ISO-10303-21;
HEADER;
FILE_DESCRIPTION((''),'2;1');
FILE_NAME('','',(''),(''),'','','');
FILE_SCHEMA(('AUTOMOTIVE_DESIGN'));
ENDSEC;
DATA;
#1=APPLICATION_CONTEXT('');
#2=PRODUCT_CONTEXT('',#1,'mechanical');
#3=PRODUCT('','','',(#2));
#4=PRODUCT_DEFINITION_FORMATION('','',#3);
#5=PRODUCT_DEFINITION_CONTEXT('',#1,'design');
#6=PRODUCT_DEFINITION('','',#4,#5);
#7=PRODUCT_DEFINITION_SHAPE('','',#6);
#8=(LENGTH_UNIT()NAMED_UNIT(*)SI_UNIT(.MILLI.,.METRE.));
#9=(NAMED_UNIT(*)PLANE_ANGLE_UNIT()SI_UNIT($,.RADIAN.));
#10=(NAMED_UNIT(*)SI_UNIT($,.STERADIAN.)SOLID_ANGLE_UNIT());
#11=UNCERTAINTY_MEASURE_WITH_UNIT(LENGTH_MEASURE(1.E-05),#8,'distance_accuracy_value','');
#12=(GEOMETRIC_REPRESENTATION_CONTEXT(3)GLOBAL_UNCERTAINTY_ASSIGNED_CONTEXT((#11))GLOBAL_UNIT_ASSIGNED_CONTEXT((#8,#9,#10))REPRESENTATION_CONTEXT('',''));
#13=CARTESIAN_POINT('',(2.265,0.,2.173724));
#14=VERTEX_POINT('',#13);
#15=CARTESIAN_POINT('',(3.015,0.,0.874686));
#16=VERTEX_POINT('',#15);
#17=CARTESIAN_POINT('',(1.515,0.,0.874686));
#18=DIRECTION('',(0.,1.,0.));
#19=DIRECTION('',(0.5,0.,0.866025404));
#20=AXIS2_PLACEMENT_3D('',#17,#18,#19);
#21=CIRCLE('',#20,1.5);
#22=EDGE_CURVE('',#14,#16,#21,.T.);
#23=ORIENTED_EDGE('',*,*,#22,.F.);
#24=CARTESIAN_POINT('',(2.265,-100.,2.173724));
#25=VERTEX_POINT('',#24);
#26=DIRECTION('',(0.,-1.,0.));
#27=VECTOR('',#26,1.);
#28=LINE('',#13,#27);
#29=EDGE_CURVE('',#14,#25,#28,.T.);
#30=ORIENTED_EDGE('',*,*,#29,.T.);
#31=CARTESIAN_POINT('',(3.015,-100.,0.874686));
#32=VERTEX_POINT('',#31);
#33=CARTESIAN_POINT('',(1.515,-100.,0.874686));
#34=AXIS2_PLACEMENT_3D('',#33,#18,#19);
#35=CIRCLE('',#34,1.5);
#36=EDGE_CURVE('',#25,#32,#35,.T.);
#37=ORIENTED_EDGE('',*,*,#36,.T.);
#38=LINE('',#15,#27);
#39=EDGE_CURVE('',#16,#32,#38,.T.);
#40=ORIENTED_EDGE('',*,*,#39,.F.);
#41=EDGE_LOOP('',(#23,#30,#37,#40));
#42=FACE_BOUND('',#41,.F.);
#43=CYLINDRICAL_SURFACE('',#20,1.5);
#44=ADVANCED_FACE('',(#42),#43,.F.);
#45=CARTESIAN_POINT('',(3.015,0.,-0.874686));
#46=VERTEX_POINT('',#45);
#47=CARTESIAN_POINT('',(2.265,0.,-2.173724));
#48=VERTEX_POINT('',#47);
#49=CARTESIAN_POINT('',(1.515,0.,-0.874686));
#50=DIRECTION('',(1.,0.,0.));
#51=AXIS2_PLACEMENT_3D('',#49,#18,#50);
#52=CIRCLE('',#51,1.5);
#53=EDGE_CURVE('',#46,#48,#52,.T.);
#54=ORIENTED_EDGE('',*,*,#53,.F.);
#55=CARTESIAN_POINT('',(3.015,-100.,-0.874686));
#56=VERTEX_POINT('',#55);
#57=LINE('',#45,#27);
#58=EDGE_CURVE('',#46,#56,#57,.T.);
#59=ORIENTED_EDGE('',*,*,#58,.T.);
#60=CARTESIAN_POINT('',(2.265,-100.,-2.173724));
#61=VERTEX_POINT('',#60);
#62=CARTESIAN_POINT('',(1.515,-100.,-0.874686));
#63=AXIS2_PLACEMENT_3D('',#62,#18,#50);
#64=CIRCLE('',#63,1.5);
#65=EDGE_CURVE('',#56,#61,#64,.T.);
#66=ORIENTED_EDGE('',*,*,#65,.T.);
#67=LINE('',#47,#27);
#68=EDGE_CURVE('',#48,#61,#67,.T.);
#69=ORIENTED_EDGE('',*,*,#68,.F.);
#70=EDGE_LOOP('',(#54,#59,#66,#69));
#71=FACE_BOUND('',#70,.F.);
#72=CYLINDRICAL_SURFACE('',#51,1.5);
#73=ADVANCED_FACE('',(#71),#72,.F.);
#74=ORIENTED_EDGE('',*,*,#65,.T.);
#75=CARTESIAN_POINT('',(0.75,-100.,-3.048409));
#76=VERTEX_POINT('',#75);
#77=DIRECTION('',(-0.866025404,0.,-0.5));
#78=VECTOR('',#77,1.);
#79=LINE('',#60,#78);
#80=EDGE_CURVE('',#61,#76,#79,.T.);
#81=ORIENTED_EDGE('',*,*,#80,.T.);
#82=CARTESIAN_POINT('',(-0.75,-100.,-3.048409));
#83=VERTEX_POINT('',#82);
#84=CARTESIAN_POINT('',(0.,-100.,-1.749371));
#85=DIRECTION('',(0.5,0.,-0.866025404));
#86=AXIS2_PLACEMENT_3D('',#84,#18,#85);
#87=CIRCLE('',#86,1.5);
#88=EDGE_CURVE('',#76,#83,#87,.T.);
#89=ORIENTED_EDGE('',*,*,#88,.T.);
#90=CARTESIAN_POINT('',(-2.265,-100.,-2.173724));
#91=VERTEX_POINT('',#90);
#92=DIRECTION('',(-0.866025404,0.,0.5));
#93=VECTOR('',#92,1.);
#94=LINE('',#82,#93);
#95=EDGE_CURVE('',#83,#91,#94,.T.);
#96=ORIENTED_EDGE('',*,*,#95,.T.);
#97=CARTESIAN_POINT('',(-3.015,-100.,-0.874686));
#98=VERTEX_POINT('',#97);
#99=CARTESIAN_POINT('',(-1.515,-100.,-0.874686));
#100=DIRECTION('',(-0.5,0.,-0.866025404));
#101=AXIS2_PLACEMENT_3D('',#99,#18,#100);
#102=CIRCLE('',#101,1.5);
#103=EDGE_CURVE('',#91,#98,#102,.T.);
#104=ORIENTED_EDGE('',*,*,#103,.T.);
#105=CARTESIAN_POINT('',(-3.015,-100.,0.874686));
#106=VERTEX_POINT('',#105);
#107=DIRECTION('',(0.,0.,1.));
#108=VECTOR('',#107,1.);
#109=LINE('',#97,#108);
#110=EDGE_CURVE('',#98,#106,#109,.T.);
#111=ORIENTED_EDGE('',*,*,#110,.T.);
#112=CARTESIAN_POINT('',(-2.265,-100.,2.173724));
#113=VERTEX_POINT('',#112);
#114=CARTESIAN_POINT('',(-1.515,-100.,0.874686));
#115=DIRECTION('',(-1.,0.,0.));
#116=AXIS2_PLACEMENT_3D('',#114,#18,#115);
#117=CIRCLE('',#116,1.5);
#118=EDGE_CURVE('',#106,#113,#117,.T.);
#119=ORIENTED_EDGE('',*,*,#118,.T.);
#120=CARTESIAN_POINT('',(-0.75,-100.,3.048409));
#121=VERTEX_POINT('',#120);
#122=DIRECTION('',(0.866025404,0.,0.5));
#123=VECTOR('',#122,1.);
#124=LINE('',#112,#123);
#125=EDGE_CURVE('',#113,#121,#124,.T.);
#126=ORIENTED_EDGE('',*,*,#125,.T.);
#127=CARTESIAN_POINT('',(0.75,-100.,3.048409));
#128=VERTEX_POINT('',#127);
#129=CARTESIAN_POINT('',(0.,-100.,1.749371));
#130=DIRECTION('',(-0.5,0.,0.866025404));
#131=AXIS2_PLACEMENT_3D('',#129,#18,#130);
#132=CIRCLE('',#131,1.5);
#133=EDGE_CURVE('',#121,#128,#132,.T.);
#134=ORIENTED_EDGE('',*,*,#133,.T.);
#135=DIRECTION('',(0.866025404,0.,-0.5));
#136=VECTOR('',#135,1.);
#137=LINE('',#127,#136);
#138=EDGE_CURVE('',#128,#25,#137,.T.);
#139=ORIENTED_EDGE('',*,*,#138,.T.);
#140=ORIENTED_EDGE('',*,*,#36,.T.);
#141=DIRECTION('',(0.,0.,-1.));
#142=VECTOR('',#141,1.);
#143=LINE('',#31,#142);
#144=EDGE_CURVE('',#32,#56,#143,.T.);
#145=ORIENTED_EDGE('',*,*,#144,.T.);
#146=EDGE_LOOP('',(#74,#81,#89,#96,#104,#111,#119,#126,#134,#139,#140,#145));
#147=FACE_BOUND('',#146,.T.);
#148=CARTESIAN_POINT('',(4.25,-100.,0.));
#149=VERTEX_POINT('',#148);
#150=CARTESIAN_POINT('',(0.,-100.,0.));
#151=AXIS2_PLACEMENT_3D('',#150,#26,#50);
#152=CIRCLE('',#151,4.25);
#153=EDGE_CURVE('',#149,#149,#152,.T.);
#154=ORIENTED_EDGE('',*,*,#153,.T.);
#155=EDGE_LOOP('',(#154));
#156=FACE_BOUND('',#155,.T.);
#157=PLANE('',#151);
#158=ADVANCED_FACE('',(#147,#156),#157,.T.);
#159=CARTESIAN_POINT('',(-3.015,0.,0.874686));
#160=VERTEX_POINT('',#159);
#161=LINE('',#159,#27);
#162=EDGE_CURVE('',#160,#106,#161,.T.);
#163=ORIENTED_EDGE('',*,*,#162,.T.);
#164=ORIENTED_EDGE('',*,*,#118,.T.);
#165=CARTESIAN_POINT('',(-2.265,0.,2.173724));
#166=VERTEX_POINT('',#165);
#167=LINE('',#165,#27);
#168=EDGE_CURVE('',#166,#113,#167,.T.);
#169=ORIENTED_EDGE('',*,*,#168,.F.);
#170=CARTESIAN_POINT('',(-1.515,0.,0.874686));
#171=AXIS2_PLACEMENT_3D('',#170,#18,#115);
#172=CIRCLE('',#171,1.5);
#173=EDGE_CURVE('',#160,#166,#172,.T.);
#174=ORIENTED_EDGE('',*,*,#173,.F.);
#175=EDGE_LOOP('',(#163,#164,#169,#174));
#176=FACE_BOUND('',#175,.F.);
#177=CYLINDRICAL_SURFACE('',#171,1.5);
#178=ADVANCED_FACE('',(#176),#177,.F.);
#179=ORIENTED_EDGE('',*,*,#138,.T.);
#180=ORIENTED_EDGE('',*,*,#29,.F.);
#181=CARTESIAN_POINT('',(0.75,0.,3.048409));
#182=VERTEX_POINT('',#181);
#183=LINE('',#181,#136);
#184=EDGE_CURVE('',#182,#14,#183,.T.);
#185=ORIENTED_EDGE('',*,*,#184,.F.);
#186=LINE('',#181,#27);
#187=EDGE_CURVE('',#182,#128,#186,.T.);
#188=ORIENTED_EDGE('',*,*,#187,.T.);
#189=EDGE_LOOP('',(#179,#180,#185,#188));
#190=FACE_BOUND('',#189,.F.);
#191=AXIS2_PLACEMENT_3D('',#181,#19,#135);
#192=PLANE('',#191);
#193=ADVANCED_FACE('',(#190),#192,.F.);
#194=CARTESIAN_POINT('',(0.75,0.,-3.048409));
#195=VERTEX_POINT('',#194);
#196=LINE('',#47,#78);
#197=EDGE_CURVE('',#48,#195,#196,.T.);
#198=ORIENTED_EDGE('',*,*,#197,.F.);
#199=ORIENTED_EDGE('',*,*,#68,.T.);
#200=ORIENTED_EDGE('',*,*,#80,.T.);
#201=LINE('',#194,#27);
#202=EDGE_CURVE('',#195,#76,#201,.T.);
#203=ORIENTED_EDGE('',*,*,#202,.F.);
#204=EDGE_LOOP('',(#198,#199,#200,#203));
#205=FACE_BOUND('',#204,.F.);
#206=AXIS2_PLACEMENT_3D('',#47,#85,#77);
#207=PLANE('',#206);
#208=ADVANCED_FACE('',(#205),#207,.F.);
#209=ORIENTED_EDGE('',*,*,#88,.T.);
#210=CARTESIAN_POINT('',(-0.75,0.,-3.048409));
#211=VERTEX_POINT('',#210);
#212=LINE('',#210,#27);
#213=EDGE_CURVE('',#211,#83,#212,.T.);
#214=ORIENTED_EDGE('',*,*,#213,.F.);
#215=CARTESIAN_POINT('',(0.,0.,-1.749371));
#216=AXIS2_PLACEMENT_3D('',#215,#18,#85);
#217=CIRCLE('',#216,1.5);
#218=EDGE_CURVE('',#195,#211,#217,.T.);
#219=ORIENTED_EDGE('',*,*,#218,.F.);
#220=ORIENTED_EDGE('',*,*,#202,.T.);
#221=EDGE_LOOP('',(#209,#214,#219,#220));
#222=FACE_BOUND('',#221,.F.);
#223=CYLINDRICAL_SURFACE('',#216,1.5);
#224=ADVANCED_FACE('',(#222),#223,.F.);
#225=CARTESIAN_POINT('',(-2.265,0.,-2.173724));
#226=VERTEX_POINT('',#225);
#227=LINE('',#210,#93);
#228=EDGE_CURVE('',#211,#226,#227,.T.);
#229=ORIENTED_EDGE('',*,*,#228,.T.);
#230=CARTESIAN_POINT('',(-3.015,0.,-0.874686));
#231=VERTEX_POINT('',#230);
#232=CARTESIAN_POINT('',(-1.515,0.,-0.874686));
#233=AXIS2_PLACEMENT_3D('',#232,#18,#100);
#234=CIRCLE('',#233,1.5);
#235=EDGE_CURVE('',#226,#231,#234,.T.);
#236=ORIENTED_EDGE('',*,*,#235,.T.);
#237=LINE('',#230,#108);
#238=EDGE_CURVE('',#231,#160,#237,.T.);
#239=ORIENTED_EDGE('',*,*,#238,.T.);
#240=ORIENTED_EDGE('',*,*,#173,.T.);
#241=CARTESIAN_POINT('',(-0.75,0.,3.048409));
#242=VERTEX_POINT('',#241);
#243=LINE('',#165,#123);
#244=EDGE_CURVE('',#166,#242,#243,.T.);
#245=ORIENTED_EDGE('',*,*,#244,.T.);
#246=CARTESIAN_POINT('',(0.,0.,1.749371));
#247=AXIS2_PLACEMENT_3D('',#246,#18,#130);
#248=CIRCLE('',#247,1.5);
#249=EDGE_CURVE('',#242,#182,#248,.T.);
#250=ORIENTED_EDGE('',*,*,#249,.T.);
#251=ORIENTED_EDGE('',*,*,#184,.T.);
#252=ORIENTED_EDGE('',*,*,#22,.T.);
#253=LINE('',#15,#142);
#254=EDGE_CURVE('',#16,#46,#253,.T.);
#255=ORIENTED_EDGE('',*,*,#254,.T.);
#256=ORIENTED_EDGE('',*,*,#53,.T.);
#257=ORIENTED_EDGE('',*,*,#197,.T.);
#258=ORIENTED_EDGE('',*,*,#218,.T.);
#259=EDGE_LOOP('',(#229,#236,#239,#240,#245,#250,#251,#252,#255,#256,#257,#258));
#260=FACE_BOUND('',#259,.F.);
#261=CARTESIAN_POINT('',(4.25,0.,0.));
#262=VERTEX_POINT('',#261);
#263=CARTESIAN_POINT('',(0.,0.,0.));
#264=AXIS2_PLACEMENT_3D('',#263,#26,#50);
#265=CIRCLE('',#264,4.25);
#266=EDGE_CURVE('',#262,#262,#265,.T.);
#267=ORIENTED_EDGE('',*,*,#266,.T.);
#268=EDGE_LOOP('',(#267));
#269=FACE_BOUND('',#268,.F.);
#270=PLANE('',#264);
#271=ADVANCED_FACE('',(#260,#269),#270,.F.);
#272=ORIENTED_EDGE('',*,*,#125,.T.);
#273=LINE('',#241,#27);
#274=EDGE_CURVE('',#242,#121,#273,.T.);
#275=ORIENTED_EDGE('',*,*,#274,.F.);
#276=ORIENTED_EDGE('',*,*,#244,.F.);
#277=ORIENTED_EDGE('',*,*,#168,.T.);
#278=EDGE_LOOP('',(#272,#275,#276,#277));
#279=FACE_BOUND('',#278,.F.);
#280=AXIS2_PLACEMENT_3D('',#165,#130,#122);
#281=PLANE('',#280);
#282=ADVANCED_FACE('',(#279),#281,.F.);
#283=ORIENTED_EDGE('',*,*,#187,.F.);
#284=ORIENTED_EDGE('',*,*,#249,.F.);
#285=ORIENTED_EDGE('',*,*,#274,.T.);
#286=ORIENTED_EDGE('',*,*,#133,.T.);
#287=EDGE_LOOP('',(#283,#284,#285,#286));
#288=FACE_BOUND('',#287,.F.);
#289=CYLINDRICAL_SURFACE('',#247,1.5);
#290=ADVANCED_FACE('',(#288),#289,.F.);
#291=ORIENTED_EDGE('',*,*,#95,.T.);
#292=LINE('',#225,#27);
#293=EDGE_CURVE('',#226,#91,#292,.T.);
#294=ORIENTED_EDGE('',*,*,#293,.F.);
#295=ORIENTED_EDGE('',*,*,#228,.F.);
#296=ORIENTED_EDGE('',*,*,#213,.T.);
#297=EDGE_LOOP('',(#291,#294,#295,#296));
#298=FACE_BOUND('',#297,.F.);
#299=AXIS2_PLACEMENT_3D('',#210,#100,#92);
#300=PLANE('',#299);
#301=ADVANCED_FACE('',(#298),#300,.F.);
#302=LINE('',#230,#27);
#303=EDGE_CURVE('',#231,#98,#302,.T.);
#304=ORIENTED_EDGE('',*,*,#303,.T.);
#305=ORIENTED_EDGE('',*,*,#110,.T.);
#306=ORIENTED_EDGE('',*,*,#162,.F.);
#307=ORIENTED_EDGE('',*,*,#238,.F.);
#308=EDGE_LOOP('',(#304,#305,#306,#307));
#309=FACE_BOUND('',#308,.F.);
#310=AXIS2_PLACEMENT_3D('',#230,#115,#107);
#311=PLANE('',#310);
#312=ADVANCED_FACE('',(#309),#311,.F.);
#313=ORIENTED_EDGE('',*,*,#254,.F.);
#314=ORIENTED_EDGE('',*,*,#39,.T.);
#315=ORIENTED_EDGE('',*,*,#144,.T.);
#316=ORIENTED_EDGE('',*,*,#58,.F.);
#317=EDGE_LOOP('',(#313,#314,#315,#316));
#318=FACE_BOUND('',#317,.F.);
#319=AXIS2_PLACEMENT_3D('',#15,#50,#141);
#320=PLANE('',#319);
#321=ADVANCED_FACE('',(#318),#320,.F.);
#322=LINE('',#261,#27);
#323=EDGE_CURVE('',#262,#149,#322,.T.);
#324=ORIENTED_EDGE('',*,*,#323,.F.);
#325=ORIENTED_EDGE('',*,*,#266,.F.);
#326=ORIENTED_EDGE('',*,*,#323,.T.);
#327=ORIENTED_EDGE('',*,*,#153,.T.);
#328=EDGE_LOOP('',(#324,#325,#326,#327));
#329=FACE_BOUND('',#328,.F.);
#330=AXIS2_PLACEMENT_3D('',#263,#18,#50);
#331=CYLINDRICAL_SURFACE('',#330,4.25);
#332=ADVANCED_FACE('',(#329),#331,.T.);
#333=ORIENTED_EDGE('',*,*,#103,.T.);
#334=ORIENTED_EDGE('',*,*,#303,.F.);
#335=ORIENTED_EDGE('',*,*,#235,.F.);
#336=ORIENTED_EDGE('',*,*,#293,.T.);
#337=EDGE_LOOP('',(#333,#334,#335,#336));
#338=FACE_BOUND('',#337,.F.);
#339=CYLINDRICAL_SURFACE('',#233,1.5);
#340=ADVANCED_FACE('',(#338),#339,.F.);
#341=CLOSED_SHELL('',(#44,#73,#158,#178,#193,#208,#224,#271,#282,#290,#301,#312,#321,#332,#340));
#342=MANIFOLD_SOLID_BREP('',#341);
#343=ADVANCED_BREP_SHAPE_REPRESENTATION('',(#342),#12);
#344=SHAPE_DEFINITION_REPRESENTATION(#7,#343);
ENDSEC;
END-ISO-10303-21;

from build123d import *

# Parameters (mm, degrees)
F0_R     = 4.25
F1_DEPTH = 100


# Not quite as in the source:
# - a feature of the source that left no trace in its solid (it failed there, or was rolled back) is left out


with BuildPart() as f1:
    # F0 (on Front) → F1 (new body)
    with BuildSketch(Plane.XZ):
        Circle(F0_R)
        with BuildLine():
            ThreePointArc((2.265, 2.1737237635), (2.8140381057, 1.6246856578), (3.015, 0.8746856578))
            Line((3.015, 0.8746856578), (3.015, -0.8746856578))
            ThreePointArc((3.015, -0.8746856578), (2.8140381057, -1.6246856578), (2.265, -2.1737237635))
            Line((2.265, -2.1737237635), (0.75, -3.0484094213))
            ThreePointArc((0.75, -3.0484094213), (0, -3.2493713156), (-0.75, -3.0484094213))
            Line((-0.75, -3.0484094213), (-2.265, -2.1737237635))
            ThreePointArc((-2.265, -2.1737237635), (-2.8140381057, -1.6246856578), (-3.015, -0.8746856578))
            Line((-3.015, -0.8746856578), (-3.015, 0.8746856578))
            ThreePointArc((-3.015, 0.8746856578), (-2.8140381057, 1.6246856578), (-2.265, 2.1737237635))
            Line((-2.265, 2.1737237635), (-0.75, 3.0484094213))
            ThreePointArc((-0.75, 3.0484094213), (0, 3.2493713156), (0.75, 3.0484094213))
            Line((0.75, 3.0484094213), (2.265, 2.1737237635))
        make_face(mode=Mode.SUBTRACT)
    extrude(amount=F1_DEPTH)


solid = f1.part
